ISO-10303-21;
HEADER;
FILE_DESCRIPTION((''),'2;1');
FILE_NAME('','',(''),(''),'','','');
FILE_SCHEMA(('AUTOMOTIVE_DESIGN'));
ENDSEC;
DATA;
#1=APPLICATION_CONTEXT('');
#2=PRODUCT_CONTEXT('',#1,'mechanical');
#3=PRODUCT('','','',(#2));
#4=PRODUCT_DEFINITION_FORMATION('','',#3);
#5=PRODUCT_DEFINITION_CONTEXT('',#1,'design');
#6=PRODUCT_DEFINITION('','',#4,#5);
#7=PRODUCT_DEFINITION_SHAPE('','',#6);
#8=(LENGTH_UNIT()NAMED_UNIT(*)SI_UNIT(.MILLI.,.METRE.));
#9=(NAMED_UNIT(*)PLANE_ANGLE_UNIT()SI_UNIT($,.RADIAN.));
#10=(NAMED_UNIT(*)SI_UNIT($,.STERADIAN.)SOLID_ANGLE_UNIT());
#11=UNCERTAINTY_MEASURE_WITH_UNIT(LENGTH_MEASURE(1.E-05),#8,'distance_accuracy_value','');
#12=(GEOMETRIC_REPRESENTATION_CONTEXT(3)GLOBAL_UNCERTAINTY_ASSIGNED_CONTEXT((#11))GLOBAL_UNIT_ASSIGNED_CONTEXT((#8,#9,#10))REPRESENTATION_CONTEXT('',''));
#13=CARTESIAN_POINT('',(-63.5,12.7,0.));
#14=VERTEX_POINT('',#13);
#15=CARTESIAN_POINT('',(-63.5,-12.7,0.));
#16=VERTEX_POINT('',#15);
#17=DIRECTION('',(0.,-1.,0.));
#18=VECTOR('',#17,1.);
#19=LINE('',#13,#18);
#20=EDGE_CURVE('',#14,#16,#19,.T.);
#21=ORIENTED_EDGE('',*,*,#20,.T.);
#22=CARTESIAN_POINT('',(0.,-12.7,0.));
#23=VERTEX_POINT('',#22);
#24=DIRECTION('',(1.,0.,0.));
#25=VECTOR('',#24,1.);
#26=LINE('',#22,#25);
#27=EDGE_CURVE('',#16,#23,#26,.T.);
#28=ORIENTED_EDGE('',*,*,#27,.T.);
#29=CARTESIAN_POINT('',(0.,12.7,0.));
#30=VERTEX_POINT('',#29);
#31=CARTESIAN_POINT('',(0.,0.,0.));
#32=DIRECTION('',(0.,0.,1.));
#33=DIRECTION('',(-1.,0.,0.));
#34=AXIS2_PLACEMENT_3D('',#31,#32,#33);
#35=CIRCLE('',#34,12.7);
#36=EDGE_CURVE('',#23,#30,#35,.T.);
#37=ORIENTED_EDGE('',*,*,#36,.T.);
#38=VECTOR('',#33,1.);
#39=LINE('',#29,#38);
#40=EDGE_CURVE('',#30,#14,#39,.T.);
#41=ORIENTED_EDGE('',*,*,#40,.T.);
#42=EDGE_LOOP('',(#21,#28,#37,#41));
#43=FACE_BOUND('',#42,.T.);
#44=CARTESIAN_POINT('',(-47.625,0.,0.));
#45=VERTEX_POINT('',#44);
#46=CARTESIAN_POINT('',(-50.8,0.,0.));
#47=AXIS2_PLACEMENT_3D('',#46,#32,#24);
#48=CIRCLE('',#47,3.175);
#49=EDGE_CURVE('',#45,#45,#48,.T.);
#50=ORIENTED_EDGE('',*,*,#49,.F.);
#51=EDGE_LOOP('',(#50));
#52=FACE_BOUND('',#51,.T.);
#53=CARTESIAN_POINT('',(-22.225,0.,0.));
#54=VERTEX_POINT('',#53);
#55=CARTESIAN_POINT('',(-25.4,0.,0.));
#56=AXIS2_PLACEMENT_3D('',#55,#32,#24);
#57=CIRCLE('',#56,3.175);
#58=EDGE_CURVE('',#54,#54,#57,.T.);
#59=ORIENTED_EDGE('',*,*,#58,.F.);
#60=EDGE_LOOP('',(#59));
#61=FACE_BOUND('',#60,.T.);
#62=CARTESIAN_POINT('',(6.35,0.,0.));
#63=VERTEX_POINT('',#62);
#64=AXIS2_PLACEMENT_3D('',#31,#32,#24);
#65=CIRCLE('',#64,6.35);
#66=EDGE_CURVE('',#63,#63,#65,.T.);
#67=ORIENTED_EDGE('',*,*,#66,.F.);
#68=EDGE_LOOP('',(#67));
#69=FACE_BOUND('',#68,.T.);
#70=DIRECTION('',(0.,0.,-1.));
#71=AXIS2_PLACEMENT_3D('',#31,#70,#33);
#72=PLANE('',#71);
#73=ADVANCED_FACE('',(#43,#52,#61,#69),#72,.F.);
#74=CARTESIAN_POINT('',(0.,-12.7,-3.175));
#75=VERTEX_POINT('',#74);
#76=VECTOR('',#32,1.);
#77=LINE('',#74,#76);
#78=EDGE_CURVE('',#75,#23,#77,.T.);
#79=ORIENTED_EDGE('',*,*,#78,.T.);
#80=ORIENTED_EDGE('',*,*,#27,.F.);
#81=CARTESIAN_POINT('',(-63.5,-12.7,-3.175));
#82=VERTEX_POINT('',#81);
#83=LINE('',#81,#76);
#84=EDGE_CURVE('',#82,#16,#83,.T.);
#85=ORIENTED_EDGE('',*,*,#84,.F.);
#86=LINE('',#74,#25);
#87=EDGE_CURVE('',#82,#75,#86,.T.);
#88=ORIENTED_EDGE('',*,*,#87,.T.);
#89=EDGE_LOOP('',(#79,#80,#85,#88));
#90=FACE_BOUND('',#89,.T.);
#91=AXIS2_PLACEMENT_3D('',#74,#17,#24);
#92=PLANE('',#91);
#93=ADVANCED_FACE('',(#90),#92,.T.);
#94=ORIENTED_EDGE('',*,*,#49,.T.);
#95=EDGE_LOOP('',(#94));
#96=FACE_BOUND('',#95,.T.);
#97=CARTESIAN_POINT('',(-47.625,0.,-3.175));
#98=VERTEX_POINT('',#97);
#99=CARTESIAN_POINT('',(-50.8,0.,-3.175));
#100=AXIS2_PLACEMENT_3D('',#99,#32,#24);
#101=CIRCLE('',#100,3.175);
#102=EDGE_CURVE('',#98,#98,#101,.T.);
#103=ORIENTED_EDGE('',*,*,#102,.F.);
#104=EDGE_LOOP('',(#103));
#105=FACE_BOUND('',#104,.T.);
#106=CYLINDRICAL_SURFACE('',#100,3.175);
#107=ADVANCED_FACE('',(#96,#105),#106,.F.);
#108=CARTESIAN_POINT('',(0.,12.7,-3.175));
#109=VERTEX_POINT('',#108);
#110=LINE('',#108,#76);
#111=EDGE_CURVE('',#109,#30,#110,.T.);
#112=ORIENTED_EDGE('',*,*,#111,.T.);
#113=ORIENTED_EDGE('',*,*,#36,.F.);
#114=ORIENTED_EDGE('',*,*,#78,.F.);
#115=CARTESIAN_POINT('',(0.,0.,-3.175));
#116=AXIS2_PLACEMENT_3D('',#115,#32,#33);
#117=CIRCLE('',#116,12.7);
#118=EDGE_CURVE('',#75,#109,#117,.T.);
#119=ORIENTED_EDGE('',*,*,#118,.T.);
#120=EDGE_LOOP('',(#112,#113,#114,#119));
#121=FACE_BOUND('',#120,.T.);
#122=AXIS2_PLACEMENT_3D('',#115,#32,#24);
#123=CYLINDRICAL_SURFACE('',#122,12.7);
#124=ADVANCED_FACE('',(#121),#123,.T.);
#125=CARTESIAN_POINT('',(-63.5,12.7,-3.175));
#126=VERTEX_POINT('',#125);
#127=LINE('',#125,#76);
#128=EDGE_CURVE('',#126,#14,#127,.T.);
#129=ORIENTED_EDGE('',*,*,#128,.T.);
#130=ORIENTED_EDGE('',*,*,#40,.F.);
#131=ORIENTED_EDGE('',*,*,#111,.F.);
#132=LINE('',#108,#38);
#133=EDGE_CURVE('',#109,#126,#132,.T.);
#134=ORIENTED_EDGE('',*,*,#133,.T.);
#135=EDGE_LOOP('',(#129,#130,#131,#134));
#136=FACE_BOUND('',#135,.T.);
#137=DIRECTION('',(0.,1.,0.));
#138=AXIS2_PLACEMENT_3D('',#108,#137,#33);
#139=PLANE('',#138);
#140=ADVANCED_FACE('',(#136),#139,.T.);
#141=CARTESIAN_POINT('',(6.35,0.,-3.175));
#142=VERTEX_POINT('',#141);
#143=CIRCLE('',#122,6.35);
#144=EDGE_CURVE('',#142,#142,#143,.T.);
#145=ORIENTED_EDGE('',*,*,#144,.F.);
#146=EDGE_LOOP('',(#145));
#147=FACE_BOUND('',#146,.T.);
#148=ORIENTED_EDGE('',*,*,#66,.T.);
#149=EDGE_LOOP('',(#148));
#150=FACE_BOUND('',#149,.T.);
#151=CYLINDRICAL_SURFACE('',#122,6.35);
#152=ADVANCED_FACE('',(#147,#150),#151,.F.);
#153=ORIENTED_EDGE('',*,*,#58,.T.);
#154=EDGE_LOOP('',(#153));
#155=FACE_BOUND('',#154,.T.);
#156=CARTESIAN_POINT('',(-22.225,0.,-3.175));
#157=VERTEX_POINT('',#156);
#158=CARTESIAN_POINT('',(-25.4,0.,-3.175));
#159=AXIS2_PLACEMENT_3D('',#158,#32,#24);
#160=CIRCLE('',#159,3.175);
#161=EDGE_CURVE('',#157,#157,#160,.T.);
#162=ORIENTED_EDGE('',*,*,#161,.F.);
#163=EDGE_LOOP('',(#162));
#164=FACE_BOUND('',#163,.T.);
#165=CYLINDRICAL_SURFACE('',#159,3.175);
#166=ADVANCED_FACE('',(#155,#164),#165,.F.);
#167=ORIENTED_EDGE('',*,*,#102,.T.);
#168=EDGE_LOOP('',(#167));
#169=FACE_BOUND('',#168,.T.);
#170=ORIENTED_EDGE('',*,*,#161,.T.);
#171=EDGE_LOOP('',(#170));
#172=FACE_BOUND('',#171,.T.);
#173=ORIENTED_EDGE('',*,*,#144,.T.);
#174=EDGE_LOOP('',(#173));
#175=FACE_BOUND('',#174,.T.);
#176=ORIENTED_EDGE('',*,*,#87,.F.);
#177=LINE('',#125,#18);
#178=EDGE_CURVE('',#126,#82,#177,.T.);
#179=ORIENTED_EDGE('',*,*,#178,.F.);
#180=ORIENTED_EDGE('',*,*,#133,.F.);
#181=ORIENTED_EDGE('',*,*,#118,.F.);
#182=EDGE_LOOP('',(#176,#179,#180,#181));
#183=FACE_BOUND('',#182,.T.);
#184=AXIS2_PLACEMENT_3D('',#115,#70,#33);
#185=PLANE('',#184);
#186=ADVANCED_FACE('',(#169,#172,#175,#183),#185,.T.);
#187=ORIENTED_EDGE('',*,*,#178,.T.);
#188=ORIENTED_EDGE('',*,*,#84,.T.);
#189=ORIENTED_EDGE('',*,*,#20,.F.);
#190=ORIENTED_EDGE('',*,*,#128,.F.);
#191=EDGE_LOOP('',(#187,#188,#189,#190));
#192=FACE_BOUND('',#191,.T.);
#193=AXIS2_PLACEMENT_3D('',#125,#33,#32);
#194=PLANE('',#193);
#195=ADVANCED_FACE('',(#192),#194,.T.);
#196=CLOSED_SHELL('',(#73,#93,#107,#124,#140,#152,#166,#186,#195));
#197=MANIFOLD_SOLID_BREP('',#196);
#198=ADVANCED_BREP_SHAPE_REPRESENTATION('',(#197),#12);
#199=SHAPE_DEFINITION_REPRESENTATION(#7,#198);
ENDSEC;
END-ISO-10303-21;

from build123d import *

# Parameters (mm, degrees)
SKETCH1_R          = 6.35
SKETCH1_R_2        = 3.175
BASE_FLANGE1_DEPTH = 3.175


# Sheet-metal steps are written as plain solids
with BuildPart() as part:
    # Sketch1 → Base-Flange1 (new body)
    with BuildSketch(Plane.XY):
        with BuildLine():
            Line((0, 12.7), (-63.5, 12.7))
            Line((-63.5, 12.7), (-63.5, -12.7))
            Line((-63.5, -12.7), (0, -12.7))
            ThreePointArc((0, -12.7), (12.7, 0), (0, 12.7))
        make_face()
        Circle(SKETCH1_R, mode=Mode.SUBTRACT)
        with Locations((-50.8, 0)):
            Circle(SKETCH1_R_2, mode=Mode.SUBTRACT)
        with Locations((-25.4, 0)):
            Circle(SKETCH1_R_2, mode=Mode.SUBTRACT)
    extrude(amount=-BASE_FLANGE1_DEPTH)


solid = part.part
